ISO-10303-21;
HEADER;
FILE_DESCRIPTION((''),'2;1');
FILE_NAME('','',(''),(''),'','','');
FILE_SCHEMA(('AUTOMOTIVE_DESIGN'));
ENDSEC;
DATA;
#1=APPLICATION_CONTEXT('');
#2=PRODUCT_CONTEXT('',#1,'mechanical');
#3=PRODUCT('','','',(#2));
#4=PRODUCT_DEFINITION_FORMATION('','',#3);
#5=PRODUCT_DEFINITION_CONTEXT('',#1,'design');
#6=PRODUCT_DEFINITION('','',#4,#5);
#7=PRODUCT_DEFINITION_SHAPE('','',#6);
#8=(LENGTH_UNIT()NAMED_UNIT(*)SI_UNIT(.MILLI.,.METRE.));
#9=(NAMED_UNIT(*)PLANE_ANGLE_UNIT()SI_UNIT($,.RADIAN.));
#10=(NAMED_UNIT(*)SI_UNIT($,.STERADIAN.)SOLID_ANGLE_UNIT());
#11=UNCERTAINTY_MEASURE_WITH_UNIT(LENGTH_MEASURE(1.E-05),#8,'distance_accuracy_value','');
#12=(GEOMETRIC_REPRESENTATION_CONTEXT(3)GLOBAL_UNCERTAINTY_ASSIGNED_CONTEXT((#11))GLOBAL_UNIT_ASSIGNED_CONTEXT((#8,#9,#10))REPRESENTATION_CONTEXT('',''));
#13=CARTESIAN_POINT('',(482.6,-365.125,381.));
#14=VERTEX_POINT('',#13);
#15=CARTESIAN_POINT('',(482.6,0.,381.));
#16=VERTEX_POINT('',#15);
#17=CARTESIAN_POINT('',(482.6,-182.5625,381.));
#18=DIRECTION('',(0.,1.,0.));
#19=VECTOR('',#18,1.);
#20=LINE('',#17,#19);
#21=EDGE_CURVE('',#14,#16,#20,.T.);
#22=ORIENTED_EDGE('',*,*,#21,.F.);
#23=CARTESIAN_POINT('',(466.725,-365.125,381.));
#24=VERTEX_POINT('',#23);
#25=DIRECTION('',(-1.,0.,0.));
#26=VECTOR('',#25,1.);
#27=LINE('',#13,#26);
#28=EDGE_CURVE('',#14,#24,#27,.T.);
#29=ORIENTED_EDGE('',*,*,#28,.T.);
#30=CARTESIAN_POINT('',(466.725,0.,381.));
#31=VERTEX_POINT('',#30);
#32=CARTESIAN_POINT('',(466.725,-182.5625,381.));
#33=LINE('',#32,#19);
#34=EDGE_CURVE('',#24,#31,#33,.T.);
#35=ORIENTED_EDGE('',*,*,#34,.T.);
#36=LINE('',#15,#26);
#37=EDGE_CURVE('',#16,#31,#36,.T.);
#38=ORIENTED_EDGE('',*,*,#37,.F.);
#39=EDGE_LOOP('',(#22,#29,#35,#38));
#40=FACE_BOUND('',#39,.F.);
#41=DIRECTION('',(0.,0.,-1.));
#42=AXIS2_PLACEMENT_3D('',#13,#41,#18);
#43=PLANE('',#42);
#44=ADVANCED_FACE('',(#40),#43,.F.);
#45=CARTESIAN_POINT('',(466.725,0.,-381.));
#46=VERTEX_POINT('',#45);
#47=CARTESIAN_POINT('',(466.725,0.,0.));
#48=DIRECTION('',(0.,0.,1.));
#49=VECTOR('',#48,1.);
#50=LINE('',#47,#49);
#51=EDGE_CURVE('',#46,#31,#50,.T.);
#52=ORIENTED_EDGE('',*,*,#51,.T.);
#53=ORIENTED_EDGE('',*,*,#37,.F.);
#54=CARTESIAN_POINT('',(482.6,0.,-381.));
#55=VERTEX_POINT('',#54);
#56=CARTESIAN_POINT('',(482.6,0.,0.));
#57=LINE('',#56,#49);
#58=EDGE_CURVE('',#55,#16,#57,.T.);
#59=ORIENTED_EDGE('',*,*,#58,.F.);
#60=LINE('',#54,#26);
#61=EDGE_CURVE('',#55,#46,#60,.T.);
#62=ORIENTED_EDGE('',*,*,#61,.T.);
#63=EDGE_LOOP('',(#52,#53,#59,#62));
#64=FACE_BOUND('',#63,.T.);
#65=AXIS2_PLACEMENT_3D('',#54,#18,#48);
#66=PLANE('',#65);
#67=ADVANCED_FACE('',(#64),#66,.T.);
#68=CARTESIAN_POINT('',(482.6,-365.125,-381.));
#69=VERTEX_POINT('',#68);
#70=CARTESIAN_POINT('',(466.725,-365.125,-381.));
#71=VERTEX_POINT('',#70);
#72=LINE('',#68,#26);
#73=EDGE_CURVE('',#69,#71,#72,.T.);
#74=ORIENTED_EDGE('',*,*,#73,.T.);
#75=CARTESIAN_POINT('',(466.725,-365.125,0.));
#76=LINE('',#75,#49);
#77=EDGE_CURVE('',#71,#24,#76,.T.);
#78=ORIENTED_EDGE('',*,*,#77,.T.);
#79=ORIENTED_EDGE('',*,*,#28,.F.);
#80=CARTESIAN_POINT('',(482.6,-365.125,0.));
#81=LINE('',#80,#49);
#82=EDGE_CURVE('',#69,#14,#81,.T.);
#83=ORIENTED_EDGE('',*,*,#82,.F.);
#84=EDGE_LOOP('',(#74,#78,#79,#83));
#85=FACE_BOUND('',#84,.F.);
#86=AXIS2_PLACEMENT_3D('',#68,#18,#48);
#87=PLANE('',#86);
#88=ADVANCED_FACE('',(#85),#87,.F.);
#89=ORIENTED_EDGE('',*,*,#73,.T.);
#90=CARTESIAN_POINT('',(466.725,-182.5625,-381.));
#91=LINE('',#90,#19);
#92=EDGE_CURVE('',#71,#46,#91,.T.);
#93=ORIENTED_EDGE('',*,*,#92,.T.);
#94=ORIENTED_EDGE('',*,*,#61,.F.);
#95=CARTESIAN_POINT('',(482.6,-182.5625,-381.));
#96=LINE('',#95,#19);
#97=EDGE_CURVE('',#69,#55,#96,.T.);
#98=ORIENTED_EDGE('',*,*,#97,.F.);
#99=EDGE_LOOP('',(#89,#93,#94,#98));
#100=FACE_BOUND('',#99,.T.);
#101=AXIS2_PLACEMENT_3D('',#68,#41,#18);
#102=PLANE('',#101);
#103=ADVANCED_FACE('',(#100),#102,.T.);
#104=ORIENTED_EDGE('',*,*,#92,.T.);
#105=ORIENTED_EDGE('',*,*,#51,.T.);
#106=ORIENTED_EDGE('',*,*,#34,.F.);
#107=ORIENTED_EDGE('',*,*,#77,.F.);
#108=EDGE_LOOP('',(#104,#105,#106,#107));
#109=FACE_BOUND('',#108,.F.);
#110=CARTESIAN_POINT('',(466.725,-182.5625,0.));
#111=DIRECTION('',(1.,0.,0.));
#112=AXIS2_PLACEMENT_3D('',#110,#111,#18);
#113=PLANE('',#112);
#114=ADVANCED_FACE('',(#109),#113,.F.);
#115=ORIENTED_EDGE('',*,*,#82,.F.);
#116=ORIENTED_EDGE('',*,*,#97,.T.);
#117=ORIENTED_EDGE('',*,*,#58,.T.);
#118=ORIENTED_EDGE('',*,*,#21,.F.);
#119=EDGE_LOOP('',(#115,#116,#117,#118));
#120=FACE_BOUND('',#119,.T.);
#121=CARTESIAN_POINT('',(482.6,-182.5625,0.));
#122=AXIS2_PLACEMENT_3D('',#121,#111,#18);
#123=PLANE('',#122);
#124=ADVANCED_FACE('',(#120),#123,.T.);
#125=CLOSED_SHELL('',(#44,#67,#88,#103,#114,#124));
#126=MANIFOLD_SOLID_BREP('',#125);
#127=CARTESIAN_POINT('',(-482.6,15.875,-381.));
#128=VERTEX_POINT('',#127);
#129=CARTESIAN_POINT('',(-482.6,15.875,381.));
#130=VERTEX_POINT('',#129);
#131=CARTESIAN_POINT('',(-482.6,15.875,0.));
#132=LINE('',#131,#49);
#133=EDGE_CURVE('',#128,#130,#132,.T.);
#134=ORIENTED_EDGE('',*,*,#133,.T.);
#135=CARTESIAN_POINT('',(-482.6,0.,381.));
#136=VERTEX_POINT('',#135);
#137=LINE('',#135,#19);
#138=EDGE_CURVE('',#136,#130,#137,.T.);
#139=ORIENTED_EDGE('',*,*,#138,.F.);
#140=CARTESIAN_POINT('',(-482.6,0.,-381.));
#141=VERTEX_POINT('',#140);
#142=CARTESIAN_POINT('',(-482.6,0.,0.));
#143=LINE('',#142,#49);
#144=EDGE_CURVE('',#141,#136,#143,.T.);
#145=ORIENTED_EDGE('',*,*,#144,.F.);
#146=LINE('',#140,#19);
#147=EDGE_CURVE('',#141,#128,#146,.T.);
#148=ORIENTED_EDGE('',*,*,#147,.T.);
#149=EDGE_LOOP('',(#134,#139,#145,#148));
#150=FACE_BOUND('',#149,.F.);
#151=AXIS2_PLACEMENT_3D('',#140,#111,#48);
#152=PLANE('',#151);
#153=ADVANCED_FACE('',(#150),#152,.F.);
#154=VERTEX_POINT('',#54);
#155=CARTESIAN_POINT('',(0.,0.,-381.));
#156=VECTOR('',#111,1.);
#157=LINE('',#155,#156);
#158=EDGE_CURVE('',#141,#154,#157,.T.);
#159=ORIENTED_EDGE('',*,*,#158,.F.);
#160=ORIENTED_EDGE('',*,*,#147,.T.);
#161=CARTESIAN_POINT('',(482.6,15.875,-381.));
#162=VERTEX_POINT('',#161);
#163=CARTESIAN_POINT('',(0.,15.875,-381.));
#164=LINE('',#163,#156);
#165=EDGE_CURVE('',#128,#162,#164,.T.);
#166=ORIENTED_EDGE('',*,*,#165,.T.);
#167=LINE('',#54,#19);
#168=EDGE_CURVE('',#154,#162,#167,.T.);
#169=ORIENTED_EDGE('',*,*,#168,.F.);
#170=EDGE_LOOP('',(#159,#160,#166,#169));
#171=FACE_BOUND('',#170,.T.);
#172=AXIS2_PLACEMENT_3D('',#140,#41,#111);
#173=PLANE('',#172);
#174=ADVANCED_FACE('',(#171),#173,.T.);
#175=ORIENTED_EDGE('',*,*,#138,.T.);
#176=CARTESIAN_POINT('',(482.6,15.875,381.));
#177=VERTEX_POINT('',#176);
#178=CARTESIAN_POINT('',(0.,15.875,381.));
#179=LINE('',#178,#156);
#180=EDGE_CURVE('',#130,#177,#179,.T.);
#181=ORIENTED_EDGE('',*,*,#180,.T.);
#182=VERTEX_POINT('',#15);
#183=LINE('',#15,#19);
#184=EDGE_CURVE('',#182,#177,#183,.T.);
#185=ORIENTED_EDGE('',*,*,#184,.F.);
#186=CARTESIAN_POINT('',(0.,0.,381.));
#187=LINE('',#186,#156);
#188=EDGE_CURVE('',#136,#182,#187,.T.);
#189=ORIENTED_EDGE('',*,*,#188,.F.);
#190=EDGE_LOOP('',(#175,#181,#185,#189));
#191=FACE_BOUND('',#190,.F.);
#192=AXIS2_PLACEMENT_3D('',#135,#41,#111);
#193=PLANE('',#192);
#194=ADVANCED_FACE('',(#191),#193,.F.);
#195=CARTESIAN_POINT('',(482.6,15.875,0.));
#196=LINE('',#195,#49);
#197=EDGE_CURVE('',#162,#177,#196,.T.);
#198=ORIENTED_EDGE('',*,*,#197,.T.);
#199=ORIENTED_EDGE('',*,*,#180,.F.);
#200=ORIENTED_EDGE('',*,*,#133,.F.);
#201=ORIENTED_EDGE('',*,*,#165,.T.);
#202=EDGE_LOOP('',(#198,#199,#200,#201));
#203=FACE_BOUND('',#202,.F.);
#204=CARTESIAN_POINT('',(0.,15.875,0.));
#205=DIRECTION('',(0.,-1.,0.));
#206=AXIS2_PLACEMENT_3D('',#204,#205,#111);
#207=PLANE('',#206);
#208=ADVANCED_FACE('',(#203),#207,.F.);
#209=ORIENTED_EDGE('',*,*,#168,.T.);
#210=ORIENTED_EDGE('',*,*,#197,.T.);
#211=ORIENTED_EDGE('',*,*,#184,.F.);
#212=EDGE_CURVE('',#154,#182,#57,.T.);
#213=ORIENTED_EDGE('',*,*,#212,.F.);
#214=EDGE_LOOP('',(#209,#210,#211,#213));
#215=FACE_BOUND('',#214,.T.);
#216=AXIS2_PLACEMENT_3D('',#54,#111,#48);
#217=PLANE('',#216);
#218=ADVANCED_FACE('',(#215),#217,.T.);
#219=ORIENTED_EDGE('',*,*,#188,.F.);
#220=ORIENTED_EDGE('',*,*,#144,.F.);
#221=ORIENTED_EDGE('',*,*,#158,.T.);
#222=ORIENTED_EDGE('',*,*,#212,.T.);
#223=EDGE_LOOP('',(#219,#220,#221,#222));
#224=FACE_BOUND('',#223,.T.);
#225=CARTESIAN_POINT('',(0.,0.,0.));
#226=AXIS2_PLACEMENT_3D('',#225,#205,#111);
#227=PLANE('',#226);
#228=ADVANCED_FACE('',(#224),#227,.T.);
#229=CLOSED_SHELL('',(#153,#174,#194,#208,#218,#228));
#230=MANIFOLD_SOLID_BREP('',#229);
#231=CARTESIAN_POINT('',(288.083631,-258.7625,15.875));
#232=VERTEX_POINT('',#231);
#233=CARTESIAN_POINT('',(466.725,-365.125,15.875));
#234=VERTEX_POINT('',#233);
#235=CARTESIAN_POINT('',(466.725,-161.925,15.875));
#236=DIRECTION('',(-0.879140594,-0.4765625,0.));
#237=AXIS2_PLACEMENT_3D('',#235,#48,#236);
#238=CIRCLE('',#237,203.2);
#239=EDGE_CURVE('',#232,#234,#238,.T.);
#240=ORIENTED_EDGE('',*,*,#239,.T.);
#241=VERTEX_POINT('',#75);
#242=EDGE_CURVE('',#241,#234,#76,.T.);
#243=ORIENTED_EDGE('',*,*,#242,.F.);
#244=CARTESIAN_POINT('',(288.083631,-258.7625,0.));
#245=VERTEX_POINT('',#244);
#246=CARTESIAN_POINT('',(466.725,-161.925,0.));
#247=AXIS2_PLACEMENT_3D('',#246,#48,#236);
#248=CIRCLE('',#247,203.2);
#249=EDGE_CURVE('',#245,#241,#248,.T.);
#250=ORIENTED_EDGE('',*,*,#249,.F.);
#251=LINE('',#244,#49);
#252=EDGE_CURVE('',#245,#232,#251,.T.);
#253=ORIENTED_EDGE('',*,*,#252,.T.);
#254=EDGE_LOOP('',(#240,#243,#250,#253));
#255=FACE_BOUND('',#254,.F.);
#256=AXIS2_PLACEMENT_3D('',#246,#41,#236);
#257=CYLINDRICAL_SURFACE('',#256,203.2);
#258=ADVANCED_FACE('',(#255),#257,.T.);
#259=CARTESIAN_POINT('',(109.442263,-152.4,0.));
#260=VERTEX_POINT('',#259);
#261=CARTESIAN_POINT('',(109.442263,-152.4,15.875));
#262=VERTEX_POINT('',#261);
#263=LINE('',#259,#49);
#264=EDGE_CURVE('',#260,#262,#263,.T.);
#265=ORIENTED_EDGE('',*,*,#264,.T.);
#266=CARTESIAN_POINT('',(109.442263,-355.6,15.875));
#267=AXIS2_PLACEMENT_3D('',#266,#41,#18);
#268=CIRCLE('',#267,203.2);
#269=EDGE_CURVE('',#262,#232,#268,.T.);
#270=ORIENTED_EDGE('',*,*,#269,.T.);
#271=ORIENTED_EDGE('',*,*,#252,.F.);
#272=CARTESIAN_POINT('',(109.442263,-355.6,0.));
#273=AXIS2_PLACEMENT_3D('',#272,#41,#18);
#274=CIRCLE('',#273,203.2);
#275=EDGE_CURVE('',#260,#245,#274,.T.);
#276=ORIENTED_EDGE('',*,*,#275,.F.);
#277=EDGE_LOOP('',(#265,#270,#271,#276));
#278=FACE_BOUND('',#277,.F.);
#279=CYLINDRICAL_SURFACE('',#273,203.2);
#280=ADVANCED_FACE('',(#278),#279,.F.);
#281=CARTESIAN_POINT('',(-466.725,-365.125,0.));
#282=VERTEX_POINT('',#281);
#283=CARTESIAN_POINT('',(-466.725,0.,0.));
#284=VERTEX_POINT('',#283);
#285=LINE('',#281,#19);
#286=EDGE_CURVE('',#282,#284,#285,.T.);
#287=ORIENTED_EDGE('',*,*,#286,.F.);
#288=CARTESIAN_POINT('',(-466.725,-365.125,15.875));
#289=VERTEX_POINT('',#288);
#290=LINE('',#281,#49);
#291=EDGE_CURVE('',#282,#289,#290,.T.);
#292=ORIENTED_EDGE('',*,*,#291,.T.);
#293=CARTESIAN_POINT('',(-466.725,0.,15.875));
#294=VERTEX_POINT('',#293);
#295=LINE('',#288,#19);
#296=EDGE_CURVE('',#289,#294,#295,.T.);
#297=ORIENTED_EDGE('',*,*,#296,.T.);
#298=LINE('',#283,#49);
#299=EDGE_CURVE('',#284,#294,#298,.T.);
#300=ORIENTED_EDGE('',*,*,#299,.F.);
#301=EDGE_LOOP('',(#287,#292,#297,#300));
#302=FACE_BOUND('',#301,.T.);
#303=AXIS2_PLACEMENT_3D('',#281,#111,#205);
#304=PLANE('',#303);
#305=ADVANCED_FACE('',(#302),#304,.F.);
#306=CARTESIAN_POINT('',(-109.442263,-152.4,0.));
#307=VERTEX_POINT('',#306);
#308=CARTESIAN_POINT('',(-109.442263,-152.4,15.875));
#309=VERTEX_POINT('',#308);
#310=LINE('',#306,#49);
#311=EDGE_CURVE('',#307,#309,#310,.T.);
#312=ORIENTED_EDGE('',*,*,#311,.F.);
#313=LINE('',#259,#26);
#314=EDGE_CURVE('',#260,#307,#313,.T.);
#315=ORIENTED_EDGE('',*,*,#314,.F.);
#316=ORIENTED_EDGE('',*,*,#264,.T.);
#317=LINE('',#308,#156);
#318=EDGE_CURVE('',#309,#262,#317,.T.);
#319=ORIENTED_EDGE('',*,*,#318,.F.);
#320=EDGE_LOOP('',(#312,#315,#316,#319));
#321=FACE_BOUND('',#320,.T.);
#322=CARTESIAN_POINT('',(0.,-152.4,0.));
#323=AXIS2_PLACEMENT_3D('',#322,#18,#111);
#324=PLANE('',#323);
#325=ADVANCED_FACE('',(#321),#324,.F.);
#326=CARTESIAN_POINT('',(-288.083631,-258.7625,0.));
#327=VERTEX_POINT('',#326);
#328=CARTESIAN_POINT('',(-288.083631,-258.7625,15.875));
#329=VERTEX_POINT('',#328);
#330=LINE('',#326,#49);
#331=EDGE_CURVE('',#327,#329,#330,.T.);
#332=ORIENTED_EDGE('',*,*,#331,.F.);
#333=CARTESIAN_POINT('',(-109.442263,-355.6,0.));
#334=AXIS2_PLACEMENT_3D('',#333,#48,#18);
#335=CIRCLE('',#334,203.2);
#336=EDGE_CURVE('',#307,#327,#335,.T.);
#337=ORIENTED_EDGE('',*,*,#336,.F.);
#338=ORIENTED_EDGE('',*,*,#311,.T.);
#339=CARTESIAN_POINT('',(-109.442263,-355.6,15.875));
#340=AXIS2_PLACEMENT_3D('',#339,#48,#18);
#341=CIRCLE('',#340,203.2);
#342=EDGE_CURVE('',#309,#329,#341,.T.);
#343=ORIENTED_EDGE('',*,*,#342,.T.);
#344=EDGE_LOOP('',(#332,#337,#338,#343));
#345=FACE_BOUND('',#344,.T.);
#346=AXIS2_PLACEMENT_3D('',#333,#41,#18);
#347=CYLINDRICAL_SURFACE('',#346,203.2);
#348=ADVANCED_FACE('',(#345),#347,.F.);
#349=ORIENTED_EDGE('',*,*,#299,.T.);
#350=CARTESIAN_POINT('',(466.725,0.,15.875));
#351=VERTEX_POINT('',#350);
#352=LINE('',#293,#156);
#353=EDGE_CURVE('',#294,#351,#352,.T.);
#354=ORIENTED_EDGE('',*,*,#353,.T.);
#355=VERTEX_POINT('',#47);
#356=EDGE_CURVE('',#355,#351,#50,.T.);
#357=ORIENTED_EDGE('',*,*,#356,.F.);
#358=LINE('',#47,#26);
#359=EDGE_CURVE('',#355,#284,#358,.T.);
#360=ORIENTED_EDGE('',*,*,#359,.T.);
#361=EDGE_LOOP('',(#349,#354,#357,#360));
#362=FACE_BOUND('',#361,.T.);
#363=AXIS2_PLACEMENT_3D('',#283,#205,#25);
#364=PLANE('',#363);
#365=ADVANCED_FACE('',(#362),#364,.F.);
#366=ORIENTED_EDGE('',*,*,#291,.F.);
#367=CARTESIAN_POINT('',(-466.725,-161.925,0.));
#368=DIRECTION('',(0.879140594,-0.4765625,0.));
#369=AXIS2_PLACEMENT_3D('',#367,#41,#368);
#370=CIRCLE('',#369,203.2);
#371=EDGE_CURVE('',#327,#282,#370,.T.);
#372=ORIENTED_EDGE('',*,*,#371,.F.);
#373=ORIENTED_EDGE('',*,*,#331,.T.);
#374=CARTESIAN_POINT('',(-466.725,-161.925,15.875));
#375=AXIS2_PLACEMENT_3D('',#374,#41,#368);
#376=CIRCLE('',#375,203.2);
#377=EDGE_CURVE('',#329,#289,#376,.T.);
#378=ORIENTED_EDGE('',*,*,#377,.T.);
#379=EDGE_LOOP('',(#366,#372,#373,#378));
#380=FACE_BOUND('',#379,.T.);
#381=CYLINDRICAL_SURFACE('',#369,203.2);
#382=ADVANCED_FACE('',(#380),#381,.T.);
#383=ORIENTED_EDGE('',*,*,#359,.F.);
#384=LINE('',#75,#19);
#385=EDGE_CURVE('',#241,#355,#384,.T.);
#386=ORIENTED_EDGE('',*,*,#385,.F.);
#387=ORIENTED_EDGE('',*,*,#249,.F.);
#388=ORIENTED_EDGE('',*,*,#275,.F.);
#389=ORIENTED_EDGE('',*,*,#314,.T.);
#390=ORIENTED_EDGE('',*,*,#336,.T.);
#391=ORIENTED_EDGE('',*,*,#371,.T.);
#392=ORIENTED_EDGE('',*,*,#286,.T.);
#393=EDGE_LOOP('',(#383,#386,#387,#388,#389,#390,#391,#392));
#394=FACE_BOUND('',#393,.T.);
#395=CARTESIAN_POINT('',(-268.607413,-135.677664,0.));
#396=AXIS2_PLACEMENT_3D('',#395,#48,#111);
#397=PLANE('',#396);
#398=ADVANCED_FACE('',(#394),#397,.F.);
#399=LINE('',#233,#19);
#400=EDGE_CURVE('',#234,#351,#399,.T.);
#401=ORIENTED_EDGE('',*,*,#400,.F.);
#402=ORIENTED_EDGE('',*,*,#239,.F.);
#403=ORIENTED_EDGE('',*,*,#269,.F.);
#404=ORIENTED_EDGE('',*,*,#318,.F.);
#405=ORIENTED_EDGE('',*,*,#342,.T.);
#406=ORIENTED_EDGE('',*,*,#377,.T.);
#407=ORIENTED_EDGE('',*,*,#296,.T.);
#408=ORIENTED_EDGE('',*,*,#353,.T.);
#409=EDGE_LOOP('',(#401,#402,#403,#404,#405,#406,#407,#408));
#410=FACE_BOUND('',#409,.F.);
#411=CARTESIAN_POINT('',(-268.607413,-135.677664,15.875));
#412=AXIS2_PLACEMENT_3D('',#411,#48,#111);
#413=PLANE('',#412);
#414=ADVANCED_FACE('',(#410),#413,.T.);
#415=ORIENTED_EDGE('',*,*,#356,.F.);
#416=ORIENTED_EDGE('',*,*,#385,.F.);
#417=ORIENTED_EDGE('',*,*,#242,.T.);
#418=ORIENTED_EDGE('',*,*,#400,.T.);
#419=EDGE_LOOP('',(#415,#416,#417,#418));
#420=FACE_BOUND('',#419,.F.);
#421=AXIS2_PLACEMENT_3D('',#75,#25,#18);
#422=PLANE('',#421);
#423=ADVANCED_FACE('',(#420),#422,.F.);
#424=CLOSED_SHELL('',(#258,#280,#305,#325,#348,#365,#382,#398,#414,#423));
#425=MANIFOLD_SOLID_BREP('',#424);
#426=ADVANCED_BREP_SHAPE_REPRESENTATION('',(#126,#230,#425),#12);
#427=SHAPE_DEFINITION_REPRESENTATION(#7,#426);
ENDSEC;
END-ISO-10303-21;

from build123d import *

# Parameters (mm, degrees)
F0_W     = 965.2
F0_H     = 762
F1_DEPTH = 15.875
F2_W     = 365.125
F2_H     = 762
F3_DEPTH = 15.875
F5_DEPTH = 15.875


with BuildPart() as f1:
    # F0 (on Front) → F1 (new body)
    with BuildSketch(Plane.XZ):
        Rectangle(F0_W, F0_H)
    extrude(amount=-F1_DEPTH)


with BuildPart() as f3:
    # F2 (on face) → F3 (new body)
    with BuildSketch(Plane.YZ.offset(482.6)):
        with Locations((-182.5625, 0)):
            Rectangle(F2_W, F2_H)
    extrude(amount=-F3_DEPTH)


with BuildPart() as f5:
    # F4 (on Top) → F5 (new body)
    with BuildSketch(Plane.XY):
        with BuildLine():
            Line((466.725, -365.125), (466.725, 0))
            Line((466.725, 0), (0, 0))
            Line((0, 0), (0, -152.4))
            Line((0, -152.4), (109.4422626966, -152.4))
            ThreePointArc((109.4422626966, -152.4), (213.3962428994, -181.0038660222), (288.0836313483, -258.7625))
            ThreePointArc((288.0836313483, -258.7625), (362.7710197972, -336.5211339778), (466.725, -365.125))
        make_face()
    extrude(amount=F5_DEPTH)

    # F6: F5 across plane


with BuildPart() as f5_1:
    add(f5.part)
    add(f5.part.mirror(Plane.YZ))


solid = Compound([f1.part, f3.part, f5_1.part])
